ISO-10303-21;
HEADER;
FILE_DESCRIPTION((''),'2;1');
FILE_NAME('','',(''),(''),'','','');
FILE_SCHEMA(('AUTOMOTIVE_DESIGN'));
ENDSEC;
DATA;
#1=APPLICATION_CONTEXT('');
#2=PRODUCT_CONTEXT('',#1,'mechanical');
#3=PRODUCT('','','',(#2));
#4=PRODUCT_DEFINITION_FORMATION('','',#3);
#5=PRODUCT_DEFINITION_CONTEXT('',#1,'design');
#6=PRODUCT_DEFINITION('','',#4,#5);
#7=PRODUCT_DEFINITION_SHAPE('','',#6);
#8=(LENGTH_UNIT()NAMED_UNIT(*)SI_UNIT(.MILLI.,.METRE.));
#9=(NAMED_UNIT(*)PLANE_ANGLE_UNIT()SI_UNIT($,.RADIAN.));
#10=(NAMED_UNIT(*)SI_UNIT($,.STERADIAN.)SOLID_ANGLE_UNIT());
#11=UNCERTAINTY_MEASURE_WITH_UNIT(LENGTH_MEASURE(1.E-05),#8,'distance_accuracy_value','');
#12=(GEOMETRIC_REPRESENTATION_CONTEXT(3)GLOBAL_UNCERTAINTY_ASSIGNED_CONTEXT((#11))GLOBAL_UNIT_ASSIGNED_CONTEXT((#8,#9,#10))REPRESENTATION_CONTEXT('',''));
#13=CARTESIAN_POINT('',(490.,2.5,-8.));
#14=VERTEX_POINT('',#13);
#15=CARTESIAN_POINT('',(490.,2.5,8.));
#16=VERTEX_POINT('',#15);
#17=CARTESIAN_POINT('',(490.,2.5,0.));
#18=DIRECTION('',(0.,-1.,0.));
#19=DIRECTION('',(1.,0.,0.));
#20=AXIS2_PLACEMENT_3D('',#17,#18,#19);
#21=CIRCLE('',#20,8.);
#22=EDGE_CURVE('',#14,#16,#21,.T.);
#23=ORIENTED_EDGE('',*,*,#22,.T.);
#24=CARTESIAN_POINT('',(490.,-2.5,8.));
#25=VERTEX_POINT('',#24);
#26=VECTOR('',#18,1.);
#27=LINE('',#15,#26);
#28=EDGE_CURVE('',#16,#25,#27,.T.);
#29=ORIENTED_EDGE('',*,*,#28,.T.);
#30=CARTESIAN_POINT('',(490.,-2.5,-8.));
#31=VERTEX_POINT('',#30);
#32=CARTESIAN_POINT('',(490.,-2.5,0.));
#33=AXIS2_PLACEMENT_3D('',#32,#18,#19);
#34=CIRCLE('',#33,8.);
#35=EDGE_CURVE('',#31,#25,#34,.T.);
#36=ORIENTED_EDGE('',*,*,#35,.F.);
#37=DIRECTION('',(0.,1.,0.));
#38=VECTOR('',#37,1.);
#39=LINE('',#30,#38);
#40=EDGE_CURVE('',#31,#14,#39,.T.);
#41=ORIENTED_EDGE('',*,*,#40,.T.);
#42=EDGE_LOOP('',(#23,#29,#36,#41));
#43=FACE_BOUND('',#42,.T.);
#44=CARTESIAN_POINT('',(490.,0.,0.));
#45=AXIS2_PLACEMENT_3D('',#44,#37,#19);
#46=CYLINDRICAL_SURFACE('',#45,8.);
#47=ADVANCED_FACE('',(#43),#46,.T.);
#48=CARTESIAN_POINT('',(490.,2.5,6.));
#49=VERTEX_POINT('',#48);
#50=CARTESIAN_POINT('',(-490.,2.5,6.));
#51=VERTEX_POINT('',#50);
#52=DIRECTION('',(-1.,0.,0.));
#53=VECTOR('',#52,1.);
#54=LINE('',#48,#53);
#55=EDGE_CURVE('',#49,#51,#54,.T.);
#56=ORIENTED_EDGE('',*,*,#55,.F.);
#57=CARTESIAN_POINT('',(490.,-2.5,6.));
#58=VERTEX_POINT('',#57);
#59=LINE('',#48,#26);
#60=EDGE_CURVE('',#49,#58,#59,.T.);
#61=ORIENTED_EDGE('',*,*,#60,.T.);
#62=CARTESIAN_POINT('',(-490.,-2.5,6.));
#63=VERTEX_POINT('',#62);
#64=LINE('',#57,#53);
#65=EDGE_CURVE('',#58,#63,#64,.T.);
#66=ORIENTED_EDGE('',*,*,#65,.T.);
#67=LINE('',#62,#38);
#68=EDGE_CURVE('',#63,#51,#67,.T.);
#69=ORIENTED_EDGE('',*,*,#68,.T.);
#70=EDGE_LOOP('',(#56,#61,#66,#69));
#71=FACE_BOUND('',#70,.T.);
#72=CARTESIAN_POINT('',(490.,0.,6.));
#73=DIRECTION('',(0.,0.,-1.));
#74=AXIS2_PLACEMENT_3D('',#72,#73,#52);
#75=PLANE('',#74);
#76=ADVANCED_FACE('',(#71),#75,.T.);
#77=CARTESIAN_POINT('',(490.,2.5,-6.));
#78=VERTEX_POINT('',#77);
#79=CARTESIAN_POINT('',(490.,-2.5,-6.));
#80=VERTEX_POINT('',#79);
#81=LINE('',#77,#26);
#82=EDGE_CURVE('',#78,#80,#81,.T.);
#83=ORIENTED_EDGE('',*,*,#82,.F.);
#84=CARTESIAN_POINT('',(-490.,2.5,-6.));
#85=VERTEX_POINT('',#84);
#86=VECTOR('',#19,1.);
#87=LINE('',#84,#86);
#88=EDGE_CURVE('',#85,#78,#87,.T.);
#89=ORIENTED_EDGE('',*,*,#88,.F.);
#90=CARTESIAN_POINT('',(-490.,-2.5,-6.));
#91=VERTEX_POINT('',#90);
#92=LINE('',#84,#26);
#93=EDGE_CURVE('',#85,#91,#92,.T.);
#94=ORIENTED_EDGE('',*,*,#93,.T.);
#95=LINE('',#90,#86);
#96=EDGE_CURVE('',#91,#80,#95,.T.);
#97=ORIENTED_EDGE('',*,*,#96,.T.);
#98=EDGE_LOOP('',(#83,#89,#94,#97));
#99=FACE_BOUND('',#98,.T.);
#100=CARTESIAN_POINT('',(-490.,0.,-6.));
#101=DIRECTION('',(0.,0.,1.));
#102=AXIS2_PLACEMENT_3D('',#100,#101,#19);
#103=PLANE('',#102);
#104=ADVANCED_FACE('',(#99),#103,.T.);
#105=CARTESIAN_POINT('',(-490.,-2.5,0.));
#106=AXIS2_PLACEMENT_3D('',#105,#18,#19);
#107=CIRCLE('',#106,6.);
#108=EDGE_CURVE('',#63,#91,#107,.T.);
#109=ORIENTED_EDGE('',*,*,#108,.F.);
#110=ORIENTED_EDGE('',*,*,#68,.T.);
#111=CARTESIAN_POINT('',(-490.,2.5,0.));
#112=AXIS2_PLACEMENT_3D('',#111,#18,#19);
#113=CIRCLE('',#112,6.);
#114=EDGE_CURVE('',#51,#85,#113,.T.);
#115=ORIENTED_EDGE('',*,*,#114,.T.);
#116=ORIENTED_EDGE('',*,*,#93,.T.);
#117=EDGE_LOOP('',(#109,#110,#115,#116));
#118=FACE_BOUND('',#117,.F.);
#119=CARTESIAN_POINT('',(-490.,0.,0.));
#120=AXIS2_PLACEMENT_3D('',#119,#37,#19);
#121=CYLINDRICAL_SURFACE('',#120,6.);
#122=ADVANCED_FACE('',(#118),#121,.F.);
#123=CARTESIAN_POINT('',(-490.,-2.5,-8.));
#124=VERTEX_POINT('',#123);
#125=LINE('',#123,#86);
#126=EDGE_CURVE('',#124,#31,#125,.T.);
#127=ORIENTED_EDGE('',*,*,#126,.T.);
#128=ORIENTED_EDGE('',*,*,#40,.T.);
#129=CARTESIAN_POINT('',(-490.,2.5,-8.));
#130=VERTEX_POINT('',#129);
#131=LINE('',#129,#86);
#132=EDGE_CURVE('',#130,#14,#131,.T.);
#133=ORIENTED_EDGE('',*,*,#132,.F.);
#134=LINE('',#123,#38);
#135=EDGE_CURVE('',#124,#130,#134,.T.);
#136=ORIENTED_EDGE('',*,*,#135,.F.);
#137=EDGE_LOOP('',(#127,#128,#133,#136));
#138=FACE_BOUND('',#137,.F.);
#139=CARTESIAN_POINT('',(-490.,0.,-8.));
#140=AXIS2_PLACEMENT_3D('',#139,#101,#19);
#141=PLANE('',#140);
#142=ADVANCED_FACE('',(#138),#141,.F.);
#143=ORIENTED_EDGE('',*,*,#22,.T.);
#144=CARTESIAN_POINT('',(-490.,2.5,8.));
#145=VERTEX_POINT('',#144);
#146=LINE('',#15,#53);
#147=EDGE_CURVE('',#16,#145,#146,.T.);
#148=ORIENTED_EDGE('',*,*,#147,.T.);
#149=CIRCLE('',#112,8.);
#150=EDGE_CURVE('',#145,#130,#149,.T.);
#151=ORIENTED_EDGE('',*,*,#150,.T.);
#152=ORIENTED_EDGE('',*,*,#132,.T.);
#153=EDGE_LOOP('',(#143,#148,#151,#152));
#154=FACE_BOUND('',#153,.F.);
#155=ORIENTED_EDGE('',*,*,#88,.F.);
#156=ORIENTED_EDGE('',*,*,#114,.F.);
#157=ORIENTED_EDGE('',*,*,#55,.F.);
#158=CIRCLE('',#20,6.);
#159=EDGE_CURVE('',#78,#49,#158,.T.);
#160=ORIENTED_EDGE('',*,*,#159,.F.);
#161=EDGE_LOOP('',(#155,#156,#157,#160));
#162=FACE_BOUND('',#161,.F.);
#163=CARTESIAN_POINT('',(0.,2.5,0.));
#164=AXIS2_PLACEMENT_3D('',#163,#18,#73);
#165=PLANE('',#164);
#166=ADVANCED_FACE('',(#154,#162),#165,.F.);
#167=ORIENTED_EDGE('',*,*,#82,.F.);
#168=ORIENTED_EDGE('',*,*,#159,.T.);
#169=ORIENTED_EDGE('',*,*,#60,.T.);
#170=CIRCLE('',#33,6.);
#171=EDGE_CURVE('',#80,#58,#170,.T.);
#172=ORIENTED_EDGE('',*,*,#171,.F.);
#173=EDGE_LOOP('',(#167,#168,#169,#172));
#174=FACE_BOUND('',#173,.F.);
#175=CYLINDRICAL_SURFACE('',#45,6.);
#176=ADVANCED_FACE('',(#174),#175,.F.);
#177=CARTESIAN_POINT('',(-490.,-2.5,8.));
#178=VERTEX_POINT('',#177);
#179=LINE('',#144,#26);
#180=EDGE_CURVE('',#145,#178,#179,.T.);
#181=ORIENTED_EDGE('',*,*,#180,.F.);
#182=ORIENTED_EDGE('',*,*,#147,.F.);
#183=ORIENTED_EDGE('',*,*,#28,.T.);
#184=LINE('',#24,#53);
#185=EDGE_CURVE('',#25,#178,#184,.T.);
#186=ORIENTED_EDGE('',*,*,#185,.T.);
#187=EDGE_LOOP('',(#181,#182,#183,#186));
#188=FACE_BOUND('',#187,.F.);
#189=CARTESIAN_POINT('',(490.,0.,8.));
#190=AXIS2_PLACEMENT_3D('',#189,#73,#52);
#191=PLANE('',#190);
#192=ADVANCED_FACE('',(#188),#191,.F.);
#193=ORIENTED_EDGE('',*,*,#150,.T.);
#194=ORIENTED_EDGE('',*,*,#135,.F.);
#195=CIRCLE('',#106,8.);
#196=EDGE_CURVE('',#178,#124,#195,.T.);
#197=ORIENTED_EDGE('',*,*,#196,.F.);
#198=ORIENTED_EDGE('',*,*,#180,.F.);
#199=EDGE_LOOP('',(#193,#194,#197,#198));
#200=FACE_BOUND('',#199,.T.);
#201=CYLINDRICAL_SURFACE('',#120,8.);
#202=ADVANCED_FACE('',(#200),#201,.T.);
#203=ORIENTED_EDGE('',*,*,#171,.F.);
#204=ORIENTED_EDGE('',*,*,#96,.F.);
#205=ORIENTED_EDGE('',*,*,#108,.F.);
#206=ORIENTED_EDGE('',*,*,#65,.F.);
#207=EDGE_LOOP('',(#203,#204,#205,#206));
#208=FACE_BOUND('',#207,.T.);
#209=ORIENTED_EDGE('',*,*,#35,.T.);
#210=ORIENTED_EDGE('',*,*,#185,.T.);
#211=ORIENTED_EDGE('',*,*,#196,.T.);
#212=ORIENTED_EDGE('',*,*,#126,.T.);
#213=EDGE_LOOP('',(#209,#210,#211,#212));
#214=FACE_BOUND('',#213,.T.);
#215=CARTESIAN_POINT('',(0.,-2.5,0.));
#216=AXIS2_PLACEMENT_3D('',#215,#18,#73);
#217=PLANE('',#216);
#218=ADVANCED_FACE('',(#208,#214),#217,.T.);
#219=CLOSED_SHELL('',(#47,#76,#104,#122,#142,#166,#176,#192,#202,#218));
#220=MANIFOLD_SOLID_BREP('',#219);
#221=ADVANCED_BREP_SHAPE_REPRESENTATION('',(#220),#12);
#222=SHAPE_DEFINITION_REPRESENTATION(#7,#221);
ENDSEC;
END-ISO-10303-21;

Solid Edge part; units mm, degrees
sketch "Sketch1" plane through (0, 0, 0) normal (0, -1, 0) x (1, 0, 0)
  arc A0 (490, -8) -> (490, 8) centre (490, 0) ccw
  line L0 (490, 8) -> (-490, 8)
  arc A1 (-490, 8) -> (-490, -8) centre (-490, 0) ccw
  line L1 (-490, -8) -> (490, -8)
  line L2 (-490, -6) -> (490, -6)
  arc A2 (-490, 6) -> (-490, -6) centre (-490, 0) ccw
  line L3 (490, 6) -> (-490, 6)
  arc A3 (490, -6) -> (490, 6) centre (490, 0) ccw
  dimension "D1" = 980
  dimension "D2" = 6
  dimension "D3" = 2
extrude "Protrusion1" add sketch "Sketch1" along normal mid plane 5
